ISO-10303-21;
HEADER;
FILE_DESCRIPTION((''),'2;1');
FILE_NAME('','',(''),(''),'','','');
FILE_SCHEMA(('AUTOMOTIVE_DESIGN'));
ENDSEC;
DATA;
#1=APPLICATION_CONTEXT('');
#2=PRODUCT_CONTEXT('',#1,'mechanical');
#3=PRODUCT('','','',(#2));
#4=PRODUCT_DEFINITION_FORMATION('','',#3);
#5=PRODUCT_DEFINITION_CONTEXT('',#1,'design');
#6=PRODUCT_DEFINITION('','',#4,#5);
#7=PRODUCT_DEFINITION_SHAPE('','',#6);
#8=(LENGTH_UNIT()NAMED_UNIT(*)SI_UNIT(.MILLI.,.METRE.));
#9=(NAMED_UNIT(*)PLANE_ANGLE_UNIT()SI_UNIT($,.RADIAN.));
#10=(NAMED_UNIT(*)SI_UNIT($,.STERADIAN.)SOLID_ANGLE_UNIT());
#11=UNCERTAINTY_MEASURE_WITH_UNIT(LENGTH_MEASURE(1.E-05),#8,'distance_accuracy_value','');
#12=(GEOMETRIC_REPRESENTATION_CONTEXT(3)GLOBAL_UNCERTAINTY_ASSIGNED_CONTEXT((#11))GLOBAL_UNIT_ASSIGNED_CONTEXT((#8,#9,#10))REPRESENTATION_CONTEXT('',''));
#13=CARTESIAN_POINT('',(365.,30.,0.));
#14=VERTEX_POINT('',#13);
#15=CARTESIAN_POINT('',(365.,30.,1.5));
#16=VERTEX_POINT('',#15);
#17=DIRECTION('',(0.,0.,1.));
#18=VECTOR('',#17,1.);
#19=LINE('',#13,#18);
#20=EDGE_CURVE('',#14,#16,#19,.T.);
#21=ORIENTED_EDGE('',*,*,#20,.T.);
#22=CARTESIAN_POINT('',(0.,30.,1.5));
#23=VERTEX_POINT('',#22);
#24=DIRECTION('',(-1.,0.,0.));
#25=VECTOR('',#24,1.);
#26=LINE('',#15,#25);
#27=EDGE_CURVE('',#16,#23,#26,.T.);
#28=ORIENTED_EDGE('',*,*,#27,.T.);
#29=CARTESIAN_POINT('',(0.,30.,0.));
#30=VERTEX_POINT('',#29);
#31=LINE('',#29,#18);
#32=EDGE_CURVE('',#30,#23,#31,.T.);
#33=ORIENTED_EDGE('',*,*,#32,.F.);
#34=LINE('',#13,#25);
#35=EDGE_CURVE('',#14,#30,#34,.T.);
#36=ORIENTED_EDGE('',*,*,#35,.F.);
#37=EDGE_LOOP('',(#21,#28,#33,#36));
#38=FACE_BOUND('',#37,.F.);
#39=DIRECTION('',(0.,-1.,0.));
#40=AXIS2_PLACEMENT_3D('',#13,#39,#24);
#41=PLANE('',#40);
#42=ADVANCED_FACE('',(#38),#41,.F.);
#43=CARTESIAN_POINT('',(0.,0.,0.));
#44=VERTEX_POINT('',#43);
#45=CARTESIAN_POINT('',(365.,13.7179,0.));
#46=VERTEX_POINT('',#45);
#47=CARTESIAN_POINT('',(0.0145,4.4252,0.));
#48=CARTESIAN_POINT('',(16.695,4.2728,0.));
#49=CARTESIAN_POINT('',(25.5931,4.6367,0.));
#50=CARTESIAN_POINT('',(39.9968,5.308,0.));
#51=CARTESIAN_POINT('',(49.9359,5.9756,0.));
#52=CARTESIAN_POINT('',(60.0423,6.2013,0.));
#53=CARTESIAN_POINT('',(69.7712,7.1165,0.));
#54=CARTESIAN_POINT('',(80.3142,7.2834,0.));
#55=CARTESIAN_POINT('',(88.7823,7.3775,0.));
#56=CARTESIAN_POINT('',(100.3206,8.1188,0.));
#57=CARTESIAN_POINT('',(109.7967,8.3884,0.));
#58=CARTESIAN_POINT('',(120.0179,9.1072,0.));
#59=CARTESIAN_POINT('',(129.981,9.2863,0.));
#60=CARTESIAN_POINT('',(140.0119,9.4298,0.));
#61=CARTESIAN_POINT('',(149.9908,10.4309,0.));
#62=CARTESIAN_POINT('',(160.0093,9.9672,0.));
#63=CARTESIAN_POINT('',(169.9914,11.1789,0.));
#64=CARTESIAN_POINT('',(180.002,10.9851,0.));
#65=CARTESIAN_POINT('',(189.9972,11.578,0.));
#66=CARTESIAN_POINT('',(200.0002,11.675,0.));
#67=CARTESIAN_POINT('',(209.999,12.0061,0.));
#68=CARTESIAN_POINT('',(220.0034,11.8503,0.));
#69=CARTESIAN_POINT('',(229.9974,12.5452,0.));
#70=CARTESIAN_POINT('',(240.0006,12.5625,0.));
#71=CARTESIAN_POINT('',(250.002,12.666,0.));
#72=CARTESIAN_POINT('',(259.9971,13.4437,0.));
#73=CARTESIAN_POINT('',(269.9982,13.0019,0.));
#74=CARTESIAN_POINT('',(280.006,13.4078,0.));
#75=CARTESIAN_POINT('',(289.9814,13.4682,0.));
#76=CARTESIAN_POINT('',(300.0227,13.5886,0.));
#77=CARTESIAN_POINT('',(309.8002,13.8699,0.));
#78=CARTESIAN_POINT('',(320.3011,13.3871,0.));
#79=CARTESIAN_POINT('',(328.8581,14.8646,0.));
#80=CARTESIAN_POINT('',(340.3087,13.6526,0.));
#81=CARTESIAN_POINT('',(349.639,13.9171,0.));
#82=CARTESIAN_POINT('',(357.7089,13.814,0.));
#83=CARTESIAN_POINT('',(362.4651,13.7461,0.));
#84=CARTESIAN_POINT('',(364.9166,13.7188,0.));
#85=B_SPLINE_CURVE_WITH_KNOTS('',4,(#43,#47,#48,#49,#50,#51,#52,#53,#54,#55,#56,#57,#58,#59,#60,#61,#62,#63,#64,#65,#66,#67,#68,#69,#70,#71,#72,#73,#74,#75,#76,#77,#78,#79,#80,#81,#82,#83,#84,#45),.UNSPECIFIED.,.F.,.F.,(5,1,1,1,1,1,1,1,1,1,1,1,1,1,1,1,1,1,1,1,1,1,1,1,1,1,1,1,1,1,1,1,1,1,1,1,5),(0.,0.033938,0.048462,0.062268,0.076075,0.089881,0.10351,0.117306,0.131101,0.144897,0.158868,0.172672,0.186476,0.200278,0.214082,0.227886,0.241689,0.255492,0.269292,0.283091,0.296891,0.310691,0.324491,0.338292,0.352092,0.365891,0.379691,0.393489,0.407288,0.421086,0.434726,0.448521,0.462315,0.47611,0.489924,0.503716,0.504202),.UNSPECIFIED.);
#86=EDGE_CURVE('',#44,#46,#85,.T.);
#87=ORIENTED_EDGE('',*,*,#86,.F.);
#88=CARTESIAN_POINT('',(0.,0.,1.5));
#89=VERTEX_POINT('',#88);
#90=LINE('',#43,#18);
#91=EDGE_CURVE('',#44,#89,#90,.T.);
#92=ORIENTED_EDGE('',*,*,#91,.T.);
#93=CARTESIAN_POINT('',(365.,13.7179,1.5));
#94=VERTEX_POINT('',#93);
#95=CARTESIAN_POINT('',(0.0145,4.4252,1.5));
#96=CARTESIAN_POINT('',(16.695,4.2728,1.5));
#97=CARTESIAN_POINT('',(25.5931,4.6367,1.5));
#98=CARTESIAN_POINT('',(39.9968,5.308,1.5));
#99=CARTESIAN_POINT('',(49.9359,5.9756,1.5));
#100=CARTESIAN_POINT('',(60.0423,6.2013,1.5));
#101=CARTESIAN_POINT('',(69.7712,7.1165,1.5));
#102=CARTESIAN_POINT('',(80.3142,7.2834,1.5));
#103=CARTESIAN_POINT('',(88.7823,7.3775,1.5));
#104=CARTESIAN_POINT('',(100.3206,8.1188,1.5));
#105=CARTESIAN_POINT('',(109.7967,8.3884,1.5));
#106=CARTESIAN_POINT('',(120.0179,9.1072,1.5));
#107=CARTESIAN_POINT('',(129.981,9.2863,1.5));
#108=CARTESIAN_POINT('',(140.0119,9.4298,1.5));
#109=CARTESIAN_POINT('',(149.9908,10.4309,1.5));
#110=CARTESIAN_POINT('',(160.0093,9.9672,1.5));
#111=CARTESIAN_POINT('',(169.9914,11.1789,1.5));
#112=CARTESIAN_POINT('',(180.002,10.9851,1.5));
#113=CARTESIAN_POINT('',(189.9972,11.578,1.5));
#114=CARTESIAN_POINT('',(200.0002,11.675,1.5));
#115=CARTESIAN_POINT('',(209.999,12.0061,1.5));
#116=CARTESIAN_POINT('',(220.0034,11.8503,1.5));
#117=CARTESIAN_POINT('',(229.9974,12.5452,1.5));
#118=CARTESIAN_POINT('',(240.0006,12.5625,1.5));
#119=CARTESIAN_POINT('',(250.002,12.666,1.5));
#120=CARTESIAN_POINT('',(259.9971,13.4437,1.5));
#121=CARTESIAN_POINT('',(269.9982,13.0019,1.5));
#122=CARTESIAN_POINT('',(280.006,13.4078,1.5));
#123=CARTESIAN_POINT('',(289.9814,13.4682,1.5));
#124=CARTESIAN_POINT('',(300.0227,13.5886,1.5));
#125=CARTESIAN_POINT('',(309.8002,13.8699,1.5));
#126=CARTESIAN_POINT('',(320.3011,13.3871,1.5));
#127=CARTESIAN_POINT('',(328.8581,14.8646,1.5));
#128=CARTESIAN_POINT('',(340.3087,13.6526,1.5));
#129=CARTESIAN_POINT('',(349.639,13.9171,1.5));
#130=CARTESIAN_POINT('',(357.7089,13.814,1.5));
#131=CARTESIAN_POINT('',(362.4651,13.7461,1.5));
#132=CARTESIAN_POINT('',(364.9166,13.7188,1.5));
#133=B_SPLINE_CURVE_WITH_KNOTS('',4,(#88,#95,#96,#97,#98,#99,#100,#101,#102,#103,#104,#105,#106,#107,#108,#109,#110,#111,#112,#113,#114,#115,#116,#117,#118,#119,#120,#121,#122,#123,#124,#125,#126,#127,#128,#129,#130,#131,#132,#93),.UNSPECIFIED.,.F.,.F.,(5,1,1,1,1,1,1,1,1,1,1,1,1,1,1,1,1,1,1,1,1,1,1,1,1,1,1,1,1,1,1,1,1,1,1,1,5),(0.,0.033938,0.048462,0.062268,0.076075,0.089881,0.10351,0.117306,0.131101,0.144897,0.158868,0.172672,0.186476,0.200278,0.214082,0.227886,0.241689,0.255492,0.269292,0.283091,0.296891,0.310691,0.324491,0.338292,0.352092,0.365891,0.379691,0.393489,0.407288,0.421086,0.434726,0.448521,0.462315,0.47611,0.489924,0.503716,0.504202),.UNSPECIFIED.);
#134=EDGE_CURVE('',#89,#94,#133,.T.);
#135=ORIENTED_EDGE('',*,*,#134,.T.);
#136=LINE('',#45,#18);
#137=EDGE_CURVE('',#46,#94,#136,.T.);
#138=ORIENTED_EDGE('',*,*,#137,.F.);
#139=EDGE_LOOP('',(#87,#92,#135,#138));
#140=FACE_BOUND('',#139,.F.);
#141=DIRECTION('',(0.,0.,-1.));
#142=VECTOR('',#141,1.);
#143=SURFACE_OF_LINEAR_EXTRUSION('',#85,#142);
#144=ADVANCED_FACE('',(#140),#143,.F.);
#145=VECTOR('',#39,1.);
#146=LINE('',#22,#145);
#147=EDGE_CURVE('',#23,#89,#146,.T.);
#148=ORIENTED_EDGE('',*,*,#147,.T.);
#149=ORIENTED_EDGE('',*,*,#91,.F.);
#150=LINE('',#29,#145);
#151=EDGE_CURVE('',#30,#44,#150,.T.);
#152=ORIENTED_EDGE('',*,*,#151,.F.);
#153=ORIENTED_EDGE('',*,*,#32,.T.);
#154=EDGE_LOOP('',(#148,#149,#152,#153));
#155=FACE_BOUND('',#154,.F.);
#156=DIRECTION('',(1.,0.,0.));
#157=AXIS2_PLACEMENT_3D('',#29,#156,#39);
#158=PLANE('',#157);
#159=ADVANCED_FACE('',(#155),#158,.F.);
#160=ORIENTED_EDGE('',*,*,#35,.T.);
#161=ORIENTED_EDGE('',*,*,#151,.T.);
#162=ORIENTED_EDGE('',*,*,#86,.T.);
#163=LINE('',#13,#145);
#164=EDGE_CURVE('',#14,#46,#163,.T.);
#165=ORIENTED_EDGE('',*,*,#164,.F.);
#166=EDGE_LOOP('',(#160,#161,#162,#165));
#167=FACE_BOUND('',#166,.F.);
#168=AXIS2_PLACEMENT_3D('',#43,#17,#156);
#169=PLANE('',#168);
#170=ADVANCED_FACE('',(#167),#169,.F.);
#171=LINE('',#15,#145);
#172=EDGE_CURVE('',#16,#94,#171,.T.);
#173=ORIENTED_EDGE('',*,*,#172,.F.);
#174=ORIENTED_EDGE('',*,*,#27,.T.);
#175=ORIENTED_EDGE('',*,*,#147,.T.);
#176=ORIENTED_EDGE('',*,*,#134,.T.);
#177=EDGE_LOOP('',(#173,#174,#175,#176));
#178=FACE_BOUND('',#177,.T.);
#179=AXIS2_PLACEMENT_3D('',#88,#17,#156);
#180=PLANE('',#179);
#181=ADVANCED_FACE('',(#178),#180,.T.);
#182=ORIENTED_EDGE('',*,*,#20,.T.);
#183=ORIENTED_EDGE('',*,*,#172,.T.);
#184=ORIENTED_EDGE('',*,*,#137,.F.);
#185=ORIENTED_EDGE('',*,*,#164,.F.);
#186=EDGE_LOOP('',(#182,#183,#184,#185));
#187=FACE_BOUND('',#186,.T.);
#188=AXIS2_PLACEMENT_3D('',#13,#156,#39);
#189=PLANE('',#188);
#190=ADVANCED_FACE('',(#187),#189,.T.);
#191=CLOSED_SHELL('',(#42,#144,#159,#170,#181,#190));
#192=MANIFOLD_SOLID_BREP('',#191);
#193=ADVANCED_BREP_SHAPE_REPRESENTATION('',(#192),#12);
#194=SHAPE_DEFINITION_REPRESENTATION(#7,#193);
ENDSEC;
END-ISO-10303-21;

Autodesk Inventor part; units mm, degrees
ref_plane "YZ Plane" through (0, 0, 0) normal (1, 0, 0) x (0, 1, 0)
ref_plane "XZ Plane" through (0, 0, 0) normal (0, 1, 0) x (-1, 0, 0)
ref_plane "XY Plane" through (0, 0, 0) normal (0, 0, 1) x (1, 0, 0)
sketch "Sketch1" plane through (0, 0, 0) normal (0, 0, 1) x (1, 0, 0)
  line L0 (5.4169, -0.155) -> (5.4169, 3.485) construction
  line L1 (20, 0) -> (20, 4.5) construction
  line L2 (30, 0) -> (30, 4.85) construction
  line L3 (40, 0) -> (40, 5.35) construction
  line L4 (50, 0) -> (50, 5.89) construction
  line L5 (60, 0) -> (60, 6.34) construction
  line L6 (70, 0) -> (70, 6.97) construction
  line L7 (80, 0) -> (80, 7.27) construction
  line L8 (89.0098, -0.188) -> (89.0098, 7.492) construction
  line L9 (100, 0) -> (100, 8.03) construction
  line L10 (110, 0) -> (110, 8.48) construction
  line L11 (120, 0) -> (120, 9) construction
  line L12 (130, 0) -> (130, 9.28) construction
  line L13 (140, 0) -> (140, 9.6) construction
  line L14 (150, 0) -> (150, 10.14) construction
  line L15 (160, 0) -> (160, 10.3) construction
  line L16 (170, 0) -> (170, 10.9) construction
  line L17 (180, 0) -> (180, 11.14) construction
  line L18 (190, 0) -> (190, 11.48) construction
  line L19 (200, 0) -> (200, 11.72) construction
  line L20 (210, 0) -> (210, 11.91) construction
  line L21 (220, 0) -> (220, 12.02) construction
  line L22 (230, 0) -> (230, 12.41) construction
  line L23 (240, 0) -> (240, 12.58) construction
  line L24 (250, 0) -> (250, 12.8) construction
  line L25 (260, 0) -> (260, 13.2) construction
  line L26 (270, 0) -> (270, 13.17) construction
  line L27 (280, 0) -> (280, 13.34) construction
  line L28 (290, 0) -> (290, 13.48) construction
  line L29 (300, 0) -> (300, 13.62) construction
  line L30 (310, 0) -> (310, 13.72) construction
  line L31 (320, 0) -> (320, 13.78) construction
  line L32 (329.0907, 0.4814) -> (329.0907, 14.3214) construction
  line L33 (340, 0) -> (340, 13.94) construction
  line L34 (350, 0) -> (350, 13.84) construction
  line L35 (360, 0) -> (360, 13.78) construction
  line L36 (369.2114, -0.0184) -> (369.2114, 13.6816) construction
  line L37 (380, 0) -> (380, 13.65) construction
  line L38 (390, 0) -> (390, 13.6) construction
  line L39 (400, 0) -> (401, 0) construction
  line L40 (400, 0) -> (400, 13.55) construction
  line L41 (410, 0) -> (410, 13.5) construction
  line L42 (420, 0) -> (420, 13.45) construction
  line L43 (430, 0) -> (430, 13.4) construction
  line L44 (440, 0) -> (440, 13.3) construction
  line L45 (449.0907, 0.4814) -> (449.0907, 13.6014) construction
  line L46 (459.0907, 0.4814) -> (459.0907, 13.3914) construction
  line L47 (469.0907, 0.4814) -> (469.0907, 13.2414) construction
  line L48 (480, 0) -> (480, 12.68) construction
  line L49 (490, 0) -> (490, 12.44) construction
  line L50 (500, 0) -> (500, 12.3) construction
  line L51 (509.0907, -0.2033) -> (509.0907, 12.0967) construction
  line L52 (520, 0) -> (520, 11.72) construction
  line L53 (530, 0) -> (530, 11.57) construction
  line L54 (540, 0) -> (540, 11.42) construction
  line L55 (550, 0) -> (550, 11.11) construction
  line L56 (560, 0) -> (560, 10.82) construction
  line L57 (570, 0) -> (570, 10.59) construction
  line L58 (580, 0) -> (580, 10.1) construction
  line L59 (590, 0) -> (590, 9.83) construction
  line L60 (600, 0) -> (600, 9.58) construction
  line L61 (610, 0) -> (610, 8.82) construction
  line L62 (620, 0) -> (620, 8.44) construction
  line L63 (630, 0) -> (630, 8.19) construction
  line L64 (640, 0) -> (640, 7.4) construction
  line L65 (650, 0) -> (650, 7.17) construction
  line L66 (660, 0) -> (660, 6.6) construction
  line L67 (670, 0) -> (670, 5.98) construction
  line L68 (680, 0) -> (680, 5.6) construction
  line L69 (690, 0) -> (690, 4.88) construction
  line L70 (700, 0) -> (700, 4.66) construction
  line L71 (710, 0) -> (710, 4.2) construction
  line L72 (723.6522, 0) -> (723.6522, 3.65) construction
  spline S0 degree 4 poles (365, 13.7179) (367.2861, 13.6927) (372.0134, 13.6545) (380.3551, 13.6692) (389.8057, 13.5915) (400.0956, 13.558) (410.0033, 13.4823) (421.3768, 13.4934) (429.3322, 13.2433) (449.7646, 13.8639) (457.9068, 13.2204) (468.9537, 13.4987) (480.036, 12.5023) (489.6496, 12.4681) (500.2854, 12.2919) (508.8725, 12.1726) (520.2953, 11.6164) (529.8107, 11.5877) (540.0222, 11.4708) (549.9829, 11.1082) (560.0057, 10.7542) (570.0019, 10.7332) (579.9984, 9.9959) (589.9997, 9.777) (600.0116, 9.8283) (609.9915, 8.641) (619.9979, 8.3459) (630.0125, 8.5241) (639.9877, 7.0259) (650.0051, 7.4074) (660.0056, 6.5957) (669.9819, 5.8092) (680.0431, 5.8817) (689.9966, 4.5194) (704.3323, 5.0971) (713.673, 3.1501) (728.99, 5.1632) (730, 0) knots 0 0 0 0 0 0.02684 0.054659 0.082757 0.110587 0.138416 0.168902 0.199388 0.229874 0.260674 0.28882 0.316965 0.344787 0.372606 0.400425 0.428244 0.456387 0.48422 0.512054 0.539892 0.567729 0.595565 0.623411 0.651255 0.679099 0.706953 0.734798 0.762646 0.790499 0.818344 0.846197 0.874046 0.901891 0.930909 1 1 1 1 1
  line L73 (730, 0) -> (730, -8)
  line L74 (0, -8) -> (0, 0)
  line L75 (730, 0) -> (730, 30)
  line L76 (730, 30) -> (365, 30)
  line L77 (0, 30) -> (0, 0)
  line L78 (365, 30) -> (0, 30)
  line L79 (365, 30) -> (365, 13.7179)
  spline S1 degree 4 poles (0, 0) (0.0145, 4.4252) (16.695, 4.2728) (25.5931, 4.6367) (39.9968, 5.308) (49.9359, 5.9756) (60.0423, 6.2013) (69.7712, 7.1165) (80.3142, 7.2834) (88.7823, 7.3775) (100.3206, 8.1188) (109.7967, 8.3884) (120.0179, 9.1072) (129.981, 9.2863) (140.0119, 9.4298) (149.9908, 10.4309) (160.0093, 9.9672) (169.9914, 11.1789) (180.002, 10.9851) (189.9972, 11.578) (200.0002, 11.675) (209.999, 12.0061) (220.0034, 11.8503) (229.9974, 12.5452) (240.0006, 12.5625) (250.002, 12.666) (259.9971, 13.4437) (269.9982, 13.0019) (280.006, 13.4078) (289.9814, 13.4682) (300.0227, 13.5886) (309.8002, 13.8699) (320.3011, 13.3871) (328.8581, 14.8646) (340.3087, 13.6526) (349.639, 13.9171) (357.7089, 13.814) (362.4651, 13.7461) (364.9166, 13.7188) (365, 13.7179) knots 0 0 0 0 0 0.033938 0.048462 0.062268 0.076075 0.089881 0.10351 0.117306 0.131101 0.144897 0.158868 0.172672 0.186476 0.200278 0.214082 0.227886 0.241689 0.255492 0.269292 0.283091 0.296891 0.310691 0.324491 0.338292 0.352092 0.365891 0.379691 0.393489 0.407288 0.421086 0.434726 0.448521 0.462315 0.47611 0.489924 0.503716 0.504202 0.504202 0.504202 0.504202 0.504202
  line L80 (291.4223, 14.5287) -> (438.5777, 12.907) construction
  arc A0 (306.255, 16.0656) -> (423.7824, 14.7704) centre (376.201, 1030.1036) ccw construction
  line L81 (291.4223, 14.5287) -> (438.5777, 12.907) construction
  arc A1 (306.255, 16.0656) -> (423.7824, 14.7704) centre (376.201, 1030.1036) ccw construction
  line L82 (365, 13.7179) -> (365, 0)
  dimension "d0" = 730
  dimension "d1" = 3.64
  dimension "d2" = 4.5
  dimension "d3" = 4.85
  dimension "d4" = 5.35
  dimension "d5" = 5.89
  dimension "d6" = 6.34
  dimension "d7" = 6.97
  dimension "d8" = 7.27
  dimension "d9" = 7.68
  dimension "d10" = 8.03
  dimension "d11" = 8.48
  dimension "d12" = 9
  dimension "d13" = 9.28
  dimension "d14" = 9.6
  dimension "d15" = 10.14
  dimension "d16" = 10.3
  dimension "d17" = 10.9
  dimension "d18" = 11.14
  dimension "d19" = 11.48
  dimension "d20" = 11.72
  dimension "d21" = 11.91
  dimension "d22" = 12.02
  dimension "d23" = 12.41
  dimension "d24" = 12.58
  dimension "d25" = 12.8
  dimension "d26" = 13.2
  dimension "d27" = 13.17
  dimension "d28" = 13.34
  dimension "d29" = 13.48
  dimension "d30" = 13.62
  dimension "d31" = 13.72
  dimension "d32" = 13.78
  dimension "d34" = 13.84
  dimension "d35" = 13.94
  dimension "d36" = 13.84
  dimension "d37" = 13.78
  dimension "d38" = 13.7
  dimension "d39" = 13.65
  dimension "d40" = 13.6
  dimension "d41" = 13.55
  dimension "d42" = 13.5
  dimension "d43" = 13.45
  dimension "d44" = 13.4
  dimension "d45" = 13.3
  dimension "d47" = 13.12
  dimension "d48" = 12.91
  dimension "d49" = 12.76
  dimension "d50" = 12.68
  dimension "d51" = 12.44
  dimension "d52" = 12.3
  dimension "d53" = 12.3
  dimension "d54" = 11.72
  dimension "d55" = 11.57
  dimension "d56" = 11.42
  dimension "d57" = 11.11
  dimension "d58" = 10.82
  dimension "d59" = 10.59
  dimension "d60" = 10.1
  dimension "d61" = 9.83
  dimension "d62" = 9.58
  dimension "d63" = 8.82
  dimension "d64" = 8.44
  dimension "d65" = 8.19
extrude "Extrusion2" add sketch "Sketch1" along normal blind 1.5 contours S1 L77 L78 L79
properties part number "profil masca STANGA"
